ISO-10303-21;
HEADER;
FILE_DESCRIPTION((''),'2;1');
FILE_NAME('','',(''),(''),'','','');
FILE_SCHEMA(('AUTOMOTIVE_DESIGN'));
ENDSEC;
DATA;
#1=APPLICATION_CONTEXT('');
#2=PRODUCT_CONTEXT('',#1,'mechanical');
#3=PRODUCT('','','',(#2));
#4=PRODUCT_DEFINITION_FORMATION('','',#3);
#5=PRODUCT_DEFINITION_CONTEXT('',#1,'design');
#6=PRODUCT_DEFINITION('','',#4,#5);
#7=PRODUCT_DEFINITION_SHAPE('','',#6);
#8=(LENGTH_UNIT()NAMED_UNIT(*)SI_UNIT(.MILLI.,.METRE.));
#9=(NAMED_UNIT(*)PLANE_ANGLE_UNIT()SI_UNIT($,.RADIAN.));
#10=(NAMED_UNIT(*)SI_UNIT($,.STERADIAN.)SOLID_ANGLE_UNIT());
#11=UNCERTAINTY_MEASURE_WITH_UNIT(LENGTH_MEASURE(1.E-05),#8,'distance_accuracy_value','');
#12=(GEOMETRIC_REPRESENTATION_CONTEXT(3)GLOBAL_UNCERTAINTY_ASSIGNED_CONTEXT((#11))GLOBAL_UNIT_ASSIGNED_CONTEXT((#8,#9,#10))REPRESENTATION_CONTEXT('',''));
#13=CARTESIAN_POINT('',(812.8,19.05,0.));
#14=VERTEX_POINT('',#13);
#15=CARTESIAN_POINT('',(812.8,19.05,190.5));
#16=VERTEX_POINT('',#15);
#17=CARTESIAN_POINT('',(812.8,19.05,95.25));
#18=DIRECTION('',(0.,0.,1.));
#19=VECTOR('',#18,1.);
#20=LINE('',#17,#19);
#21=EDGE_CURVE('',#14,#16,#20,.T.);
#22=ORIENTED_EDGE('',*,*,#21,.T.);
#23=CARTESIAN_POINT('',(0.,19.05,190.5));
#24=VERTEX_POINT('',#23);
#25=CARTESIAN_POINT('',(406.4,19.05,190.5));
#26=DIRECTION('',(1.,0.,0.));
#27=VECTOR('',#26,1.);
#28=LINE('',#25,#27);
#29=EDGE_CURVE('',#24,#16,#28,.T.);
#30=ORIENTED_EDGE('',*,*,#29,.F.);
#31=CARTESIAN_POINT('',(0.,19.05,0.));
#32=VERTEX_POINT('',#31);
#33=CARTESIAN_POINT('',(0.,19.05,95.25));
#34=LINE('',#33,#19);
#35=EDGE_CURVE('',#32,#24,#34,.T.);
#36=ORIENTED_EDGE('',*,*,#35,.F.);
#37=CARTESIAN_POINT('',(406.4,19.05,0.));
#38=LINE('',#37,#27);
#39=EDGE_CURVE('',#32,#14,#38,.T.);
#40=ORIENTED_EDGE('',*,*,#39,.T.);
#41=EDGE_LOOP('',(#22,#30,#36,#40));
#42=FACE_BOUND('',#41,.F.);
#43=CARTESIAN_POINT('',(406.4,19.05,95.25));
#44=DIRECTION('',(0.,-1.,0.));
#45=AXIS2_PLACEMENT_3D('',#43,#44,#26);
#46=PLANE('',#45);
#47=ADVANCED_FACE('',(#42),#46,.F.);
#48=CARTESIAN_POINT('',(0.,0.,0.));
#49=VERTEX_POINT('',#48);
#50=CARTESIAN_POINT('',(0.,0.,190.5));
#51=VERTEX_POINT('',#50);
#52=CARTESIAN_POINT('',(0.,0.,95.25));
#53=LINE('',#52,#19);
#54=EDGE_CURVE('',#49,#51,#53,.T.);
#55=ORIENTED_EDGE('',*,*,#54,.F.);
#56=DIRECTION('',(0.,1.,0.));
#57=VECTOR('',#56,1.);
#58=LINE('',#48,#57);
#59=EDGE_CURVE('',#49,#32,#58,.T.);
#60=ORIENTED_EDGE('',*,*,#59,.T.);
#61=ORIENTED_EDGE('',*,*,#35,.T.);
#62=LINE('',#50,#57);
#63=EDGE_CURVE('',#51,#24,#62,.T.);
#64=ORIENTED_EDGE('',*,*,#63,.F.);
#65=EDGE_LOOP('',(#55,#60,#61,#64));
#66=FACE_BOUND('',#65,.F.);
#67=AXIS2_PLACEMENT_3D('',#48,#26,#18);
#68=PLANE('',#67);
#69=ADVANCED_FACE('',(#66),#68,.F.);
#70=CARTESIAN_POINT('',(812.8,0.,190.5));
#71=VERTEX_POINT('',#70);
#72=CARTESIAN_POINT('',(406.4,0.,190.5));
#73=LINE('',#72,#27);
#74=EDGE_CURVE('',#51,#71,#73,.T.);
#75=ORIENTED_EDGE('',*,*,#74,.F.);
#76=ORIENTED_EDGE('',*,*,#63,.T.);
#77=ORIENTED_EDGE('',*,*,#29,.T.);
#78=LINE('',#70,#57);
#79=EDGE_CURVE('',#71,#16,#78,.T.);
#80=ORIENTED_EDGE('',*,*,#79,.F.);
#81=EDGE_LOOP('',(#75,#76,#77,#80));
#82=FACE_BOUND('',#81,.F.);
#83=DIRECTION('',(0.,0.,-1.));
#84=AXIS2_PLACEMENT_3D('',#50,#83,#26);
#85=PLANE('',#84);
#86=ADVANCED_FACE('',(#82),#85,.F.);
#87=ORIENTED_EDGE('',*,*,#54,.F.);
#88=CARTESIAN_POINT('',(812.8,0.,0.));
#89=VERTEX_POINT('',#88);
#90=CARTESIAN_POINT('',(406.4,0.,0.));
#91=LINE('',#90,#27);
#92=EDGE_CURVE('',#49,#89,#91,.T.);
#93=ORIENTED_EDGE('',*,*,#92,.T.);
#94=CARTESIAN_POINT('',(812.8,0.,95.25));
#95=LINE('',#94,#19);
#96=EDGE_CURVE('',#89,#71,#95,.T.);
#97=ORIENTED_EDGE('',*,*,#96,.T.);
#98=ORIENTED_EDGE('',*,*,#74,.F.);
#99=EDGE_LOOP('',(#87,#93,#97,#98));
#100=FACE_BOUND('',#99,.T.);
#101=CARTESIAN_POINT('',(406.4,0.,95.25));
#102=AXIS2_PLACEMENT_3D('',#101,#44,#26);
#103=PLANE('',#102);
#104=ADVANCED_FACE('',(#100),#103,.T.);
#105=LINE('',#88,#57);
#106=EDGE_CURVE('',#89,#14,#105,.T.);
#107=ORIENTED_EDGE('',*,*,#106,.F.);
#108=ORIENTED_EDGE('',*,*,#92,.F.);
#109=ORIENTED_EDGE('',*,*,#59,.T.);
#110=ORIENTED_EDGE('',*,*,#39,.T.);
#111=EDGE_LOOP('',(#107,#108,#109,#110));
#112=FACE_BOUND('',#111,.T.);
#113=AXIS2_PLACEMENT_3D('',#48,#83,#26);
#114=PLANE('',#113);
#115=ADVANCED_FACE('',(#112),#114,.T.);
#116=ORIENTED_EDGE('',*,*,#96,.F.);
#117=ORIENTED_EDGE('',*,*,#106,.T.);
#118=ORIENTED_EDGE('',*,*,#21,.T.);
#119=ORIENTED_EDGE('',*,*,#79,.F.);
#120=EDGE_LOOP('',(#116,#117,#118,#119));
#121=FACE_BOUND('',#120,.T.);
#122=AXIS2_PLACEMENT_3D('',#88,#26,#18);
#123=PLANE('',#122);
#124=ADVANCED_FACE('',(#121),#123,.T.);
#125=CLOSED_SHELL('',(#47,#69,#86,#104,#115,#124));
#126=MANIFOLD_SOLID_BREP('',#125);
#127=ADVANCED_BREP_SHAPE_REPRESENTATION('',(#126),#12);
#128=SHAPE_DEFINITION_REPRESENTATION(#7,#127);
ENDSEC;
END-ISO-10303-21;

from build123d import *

# Parameters (mm, degrees)
F0_W     = 812.8
F0_H     = 190.5
F1_DEPTH = 19.05


# Not quite as in the source:
# - a feature names something its author has since deleted; it is built from what else it names


with BuildPart() as f1:
    # F0 (on Front) → F1 (new body)
    with BuildSketch(Plane.XZ):
        with Locations((406.4, 95.25)):
            Rectangle(F0_W, F0_H)
    extrude(amount=-F1_DEPTH)


solid = f1.part
